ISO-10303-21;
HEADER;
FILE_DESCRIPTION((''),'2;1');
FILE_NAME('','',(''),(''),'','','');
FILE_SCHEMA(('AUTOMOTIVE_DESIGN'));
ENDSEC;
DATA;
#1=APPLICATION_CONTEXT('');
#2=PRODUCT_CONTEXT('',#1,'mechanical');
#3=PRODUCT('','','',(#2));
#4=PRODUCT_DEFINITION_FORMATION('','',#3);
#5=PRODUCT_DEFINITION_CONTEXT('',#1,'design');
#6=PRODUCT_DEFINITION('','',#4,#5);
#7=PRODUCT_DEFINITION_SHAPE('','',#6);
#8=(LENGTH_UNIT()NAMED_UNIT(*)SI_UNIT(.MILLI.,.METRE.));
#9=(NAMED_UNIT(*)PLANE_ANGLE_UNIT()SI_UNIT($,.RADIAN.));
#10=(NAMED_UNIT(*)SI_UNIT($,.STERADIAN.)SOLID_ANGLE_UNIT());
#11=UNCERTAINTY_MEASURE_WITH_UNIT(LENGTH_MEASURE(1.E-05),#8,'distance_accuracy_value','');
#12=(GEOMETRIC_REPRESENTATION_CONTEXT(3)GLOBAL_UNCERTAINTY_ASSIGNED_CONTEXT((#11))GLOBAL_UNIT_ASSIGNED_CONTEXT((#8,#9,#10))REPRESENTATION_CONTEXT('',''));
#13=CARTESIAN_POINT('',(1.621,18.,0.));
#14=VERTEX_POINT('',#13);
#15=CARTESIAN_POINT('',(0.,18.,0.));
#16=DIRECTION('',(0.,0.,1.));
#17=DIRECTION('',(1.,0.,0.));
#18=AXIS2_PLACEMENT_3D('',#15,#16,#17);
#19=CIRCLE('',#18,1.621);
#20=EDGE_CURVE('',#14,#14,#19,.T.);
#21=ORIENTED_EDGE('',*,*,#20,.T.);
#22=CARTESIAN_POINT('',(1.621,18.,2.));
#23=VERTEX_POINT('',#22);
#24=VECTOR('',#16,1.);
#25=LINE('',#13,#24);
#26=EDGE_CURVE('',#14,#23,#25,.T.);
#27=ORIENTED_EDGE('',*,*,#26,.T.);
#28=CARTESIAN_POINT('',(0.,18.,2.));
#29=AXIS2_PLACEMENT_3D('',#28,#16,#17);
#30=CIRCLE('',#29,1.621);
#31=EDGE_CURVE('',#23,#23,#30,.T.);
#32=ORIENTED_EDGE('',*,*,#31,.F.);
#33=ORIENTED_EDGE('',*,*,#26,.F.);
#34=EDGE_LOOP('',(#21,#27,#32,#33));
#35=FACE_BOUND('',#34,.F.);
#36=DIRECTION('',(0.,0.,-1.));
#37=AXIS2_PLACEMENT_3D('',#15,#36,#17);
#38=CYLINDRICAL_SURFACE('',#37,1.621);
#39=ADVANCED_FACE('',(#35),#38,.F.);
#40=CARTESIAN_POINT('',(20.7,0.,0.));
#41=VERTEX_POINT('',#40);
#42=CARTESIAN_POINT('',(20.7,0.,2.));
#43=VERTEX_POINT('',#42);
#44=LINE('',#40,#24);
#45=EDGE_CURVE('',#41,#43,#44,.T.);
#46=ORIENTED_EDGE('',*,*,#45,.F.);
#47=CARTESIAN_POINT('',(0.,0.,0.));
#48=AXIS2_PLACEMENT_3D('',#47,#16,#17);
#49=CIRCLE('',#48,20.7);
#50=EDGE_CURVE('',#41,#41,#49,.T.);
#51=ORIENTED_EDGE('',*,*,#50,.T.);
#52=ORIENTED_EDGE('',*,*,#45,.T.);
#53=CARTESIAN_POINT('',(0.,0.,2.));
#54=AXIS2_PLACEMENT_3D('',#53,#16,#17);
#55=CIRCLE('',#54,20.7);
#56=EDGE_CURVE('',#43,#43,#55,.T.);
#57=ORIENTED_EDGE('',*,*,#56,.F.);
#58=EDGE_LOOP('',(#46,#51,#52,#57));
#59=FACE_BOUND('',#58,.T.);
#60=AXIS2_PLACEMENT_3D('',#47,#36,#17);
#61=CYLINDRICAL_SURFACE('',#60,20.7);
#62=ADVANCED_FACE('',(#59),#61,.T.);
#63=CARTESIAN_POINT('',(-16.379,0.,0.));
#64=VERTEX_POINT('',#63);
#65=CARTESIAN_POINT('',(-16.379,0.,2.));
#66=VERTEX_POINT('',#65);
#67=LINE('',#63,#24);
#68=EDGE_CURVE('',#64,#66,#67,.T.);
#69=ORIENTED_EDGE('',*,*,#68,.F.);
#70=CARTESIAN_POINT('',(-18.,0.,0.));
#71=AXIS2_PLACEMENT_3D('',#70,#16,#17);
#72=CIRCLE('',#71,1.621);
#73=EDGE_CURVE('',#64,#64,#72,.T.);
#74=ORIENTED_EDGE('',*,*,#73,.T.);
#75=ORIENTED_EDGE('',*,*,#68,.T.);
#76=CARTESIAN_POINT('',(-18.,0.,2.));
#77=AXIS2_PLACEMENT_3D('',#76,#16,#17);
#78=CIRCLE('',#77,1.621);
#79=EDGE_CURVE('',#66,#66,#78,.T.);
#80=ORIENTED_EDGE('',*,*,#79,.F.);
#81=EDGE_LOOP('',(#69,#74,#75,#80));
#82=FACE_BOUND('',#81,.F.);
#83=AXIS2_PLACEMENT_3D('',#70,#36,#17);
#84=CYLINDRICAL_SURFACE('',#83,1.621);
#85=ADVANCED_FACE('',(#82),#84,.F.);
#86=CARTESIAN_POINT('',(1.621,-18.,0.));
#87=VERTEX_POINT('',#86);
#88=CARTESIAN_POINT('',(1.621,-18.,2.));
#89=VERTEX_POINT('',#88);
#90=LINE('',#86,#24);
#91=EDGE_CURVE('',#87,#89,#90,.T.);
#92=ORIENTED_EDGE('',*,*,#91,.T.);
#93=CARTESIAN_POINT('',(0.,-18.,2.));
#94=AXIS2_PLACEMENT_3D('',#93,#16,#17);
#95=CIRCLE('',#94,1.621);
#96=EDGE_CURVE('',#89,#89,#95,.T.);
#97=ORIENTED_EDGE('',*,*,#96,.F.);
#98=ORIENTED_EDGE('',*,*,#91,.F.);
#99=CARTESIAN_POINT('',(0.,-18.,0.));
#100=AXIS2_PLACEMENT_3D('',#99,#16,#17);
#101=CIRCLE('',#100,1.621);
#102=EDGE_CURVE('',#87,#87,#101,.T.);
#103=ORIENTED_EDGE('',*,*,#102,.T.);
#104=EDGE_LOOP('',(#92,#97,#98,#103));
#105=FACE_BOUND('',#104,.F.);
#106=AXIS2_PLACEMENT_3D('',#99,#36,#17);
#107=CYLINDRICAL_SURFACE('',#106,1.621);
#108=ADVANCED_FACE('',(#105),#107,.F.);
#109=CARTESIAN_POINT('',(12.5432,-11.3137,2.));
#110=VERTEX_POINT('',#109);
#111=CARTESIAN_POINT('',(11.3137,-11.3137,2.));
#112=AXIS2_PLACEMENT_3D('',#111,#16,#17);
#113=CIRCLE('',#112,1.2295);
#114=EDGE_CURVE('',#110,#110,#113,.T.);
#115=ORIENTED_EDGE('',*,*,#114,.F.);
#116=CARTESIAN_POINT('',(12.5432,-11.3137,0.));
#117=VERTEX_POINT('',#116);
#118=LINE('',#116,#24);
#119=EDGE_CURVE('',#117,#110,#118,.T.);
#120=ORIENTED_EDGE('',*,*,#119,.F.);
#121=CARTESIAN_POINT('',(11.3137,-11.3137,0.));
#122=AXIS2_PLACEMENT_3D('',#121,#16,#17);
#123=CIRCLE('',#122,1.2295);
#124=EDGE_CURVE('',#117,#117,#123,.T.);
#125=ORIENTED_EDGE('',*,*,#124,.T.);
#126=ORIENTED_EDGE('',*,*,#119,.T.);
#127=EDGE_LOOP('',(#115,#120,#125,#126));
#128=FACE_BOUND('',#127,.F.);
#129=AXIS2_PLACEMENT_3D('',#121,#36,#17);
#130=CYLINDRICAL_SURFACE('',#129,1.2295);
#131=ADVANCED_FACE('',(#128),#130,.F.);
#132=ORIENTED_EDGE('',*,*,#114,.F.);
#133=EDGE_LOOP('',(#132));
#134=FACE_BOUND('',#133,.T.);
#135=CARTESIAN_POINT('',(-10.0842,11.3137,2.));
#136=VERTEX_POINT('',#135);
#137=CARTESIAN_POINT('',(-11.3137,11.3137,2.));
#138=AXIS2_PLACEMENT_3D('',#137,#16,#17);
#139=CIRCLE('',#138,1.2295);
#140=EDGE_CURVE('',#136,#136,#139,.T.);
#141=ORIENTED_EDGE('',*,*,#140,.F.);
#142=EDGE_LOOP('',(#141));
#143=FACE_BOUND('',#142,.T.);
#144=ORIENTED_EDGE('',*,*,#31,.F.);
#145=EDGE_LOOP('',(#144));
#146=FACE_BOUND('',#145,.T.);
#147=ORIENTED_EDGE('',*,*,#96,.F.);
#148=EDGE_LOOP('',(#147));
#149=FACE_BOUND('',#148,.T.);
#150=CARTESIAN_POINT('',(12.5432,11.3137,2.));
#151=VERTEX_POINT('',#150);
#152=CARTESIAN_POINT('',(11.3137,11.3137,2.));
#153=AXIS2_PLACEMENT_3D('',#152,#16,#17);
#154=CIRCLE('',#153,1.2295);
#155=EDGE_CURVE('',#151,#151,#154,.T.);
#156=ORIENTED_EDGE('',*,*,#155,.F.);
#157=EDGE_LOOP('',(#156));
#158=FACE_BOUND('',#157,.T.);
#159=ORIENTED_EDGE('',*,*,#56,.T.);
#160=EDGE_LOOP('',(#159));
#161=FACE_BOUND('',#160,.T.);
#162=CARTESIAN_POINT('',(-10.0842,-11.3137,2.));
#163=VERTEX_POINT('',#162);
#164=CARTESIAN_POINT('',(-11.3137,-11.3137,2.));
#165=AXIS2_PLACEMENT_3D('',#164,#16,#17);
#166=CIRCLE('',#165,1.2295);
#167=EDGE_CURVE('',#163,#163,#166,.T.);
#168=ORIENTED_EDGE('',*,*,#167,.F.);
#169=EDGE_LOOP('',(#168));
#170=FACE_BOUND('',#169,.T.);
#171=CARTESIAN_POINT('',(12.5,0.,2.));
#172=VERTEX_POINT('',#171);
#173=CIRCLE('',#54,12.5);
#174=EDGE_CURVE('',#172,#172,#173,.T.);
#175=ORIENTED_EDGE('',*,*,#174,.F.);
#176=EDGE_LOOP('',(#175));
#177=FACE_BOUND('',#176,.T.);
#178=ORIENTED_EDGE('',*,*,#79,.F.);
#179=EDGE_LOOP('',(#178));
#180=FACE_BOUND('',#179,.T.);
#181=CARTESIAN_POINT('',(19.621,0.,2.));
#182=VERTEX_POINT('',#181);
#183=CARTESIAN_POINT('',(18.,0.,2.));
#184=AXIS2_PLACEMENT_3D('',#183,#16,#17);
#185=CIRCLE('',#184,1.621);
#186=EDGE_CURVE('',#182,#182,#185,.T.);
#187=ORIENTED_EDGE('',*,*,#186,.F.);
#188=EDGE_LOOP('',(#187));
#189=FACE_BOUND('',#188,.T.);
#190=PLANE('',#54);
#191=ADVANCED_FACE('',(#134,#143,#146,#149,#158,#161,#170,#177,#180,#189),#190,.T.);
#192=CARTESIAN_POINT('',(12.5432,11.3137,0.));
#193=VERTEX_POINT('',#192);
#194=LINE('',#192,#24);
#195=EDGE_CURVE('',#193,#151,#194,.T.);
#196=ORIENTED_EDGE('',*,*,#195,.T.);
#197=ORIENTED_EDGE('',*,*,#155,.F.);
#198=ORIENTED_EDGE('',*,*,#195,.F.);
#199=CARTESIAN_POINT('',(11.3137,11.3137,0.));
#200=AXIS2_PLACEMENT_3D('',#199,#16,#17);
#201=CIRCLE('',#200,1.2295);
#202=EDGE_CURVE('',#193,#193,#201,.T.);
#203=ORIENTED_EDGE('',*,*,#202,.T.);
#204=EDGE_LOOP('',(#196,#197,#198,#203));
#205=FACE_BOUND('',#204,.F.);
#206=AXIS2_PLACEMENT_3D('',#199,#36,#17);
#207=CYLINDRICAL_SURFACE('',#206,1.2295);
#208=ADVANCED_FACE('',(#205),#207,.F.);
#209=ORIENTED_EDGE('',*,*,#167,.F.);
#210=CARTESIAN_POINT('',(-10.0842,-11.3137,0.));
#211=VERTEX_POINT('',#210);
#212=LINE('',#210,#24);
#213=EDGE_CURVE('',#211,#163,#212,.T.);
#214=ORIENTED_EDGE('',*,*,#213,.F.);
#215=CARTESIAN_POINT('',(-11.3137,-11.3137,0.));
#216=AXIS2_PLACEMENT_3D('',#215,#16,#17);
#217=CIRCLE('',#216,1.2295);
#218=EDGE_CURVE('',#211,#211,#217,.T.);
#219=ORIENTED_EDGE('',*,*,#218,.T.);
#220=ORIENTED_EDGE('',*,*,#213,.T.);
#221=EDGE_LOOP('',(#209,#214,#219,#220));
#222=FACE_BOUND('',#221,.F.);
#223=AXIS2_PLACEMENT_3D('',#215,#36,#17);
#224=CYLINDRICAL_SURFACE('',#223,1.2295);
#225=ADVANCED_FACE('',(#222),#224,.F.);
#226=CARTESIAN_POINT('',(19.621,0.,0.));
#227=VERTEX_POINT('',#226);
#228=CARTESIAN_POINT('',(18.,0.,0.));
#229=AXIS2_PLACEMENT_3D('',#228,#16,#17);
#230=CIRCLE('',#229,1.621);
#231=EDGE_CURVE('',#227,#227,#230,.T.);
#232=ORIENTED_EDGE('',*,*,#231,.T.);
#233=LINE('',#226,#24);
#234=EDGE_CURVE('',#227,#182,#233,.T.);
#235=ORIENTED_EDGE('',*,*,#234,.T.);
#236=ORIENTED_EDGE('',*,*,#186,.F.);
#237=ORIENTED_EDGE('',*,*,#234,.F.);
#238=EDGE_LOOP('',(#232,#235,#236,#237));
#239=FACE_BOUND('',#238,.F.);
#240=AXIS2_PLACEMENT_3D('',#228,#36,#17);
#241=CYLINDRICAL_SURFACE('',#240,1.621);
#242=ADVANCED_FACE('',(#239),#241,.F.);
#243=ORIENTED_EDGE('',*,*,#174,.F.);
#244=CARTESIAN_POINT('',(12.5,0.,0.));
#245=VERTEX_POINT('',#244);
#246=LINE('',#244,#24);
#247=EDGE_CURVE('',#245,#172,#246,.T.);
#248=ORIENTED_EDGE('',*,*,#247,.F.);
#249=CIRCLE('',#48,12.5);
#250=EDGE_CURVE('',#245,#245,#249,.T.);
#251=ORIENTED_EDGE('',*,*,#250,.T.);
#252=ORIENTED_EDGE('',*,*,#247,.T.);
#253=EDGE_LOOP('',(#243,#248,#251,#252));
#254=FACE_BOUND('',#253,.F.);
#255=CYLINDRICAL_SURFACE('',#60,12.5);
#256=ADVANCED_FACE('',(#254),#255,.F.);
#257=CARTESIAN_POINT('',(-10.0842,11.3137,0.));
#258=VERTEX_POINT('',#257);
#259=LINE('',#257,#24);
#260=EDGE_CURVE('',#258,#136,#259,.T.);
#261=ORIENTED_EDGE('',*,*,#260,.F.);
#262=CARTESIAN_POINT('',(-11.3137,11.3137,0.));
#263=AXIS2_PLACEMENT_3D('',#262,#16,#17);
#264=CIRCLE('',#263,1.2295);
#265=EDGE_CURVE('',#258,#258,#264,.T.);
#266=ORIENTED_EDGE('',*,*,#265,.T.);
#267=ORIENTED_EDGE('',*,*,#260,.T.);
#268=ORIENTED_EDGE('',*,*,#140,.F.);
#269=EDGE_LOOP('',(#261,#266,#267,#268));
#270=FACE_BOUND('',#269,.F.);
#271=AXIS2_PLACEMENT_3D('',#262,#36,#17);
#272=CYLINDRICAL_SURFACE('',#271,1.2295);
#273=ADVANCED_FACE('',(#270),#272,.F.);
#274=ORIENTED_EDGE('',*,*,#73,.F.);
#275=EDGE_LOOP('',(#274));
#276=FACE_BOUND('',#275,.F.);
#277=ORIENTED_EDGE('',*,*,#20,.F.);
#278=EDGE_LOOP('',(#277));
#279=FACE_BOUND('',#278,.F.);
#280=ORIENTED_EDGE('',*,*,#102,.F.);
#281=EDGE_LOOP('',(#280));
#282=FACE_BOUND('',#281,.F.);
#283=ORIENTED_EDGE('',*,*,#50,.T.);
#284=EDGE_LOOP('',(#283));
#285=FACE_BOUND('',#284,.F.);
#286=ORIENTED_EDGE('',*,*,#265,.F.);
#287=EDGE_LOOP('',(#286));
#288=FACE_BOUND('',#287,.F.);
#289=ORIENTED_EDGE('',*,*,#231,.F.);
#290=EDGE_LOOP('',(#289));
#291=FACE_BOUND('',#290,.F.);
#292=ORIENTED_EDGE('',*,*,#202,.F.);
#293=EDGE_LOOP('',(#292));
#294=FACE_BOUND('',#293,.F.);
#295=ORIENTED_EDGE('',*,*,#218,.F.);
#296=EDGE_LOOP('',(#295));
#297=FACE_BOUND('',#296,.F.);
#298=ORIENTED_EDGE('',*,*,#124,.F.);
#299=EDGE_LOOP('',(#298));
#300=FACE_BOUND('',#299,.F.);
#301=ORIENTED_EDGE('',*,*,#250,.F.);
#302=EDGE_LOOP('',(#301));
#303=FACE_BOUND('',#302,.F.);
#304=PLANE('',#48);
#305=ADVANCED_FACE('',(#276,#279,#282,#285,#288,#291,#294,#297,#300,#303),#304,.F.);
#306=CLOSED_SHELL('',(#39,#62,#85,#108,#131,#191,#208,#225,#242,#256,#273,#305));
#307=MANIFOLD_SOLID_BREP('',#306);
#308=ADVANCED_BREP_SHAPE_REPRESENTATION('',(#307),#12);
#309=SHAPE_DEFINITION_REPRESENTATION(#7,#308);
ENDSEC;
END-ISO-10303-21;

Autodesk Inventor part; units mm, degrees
ref_plane "YZ Plane" through (0, 0, 0) normal (1, 0, 0) x (0, 1, 0)
ref_plane "Work Plane1" through (0, 0, 0) normal (0, 0, 1) x (1, 0, 0)
sketch "Sketch1" plane through (0, 0, 0) normal (0, 0, 1) x (1, 0, 0)
  circle A0 centre (0, 0) radius 12.5 projected
  circle A1 centre (0, -18) radius 2 projected
  circle A2 centre (0, 18) radius 2 projected
  circle A3 centre (-18, 0) radius 2 projected
  circle A4 centre (18, 0) radius 2 projected
  circle A5 centre (11.3137, 11.3137) radius 1.6 projected
  circle A6 centre (-11.3137, -11.3137) radius 1.6 projected
  circle A7 centre (-11.3137, 11.3137) radius 1.6 projected
  circle A8 centre (11.3137, -11.3137) radius 1.6 projected
  circle A9 centre (0, 0) radius 20.7 projected
  circle A10 centre (-11.3137, 11.3137) radius 1.2295
  circle A11 centre (0, 18) radius 1.621
  circle A12 centre (11.3137, 11.3137) radius 1.2295
  circle A13 centre (18, 0) radius 1.621
  circle A14 centre (11.3137, -11.3137) radius 1.2295
  circle A15 centre (-11.3137, -11.3137) radius 1.2295
  circle A16 centre (0, -18) radius 1.621
  circle A17 centre (-18, 0) radius 1.621
ref_plane "Work Plane2" through (-10.1976, -10.1976, 2) normal (0, 0, 1) x (0.910504, -0.4135003, 0)
extrude "Extrusion1" add sketch "Sketch1" along normal up to surface (2 mm away) contours A1 | A2 | A3 | A4 | A5 | A6 | A7 | A8 | A9
properties part number "gearboxspacer"
